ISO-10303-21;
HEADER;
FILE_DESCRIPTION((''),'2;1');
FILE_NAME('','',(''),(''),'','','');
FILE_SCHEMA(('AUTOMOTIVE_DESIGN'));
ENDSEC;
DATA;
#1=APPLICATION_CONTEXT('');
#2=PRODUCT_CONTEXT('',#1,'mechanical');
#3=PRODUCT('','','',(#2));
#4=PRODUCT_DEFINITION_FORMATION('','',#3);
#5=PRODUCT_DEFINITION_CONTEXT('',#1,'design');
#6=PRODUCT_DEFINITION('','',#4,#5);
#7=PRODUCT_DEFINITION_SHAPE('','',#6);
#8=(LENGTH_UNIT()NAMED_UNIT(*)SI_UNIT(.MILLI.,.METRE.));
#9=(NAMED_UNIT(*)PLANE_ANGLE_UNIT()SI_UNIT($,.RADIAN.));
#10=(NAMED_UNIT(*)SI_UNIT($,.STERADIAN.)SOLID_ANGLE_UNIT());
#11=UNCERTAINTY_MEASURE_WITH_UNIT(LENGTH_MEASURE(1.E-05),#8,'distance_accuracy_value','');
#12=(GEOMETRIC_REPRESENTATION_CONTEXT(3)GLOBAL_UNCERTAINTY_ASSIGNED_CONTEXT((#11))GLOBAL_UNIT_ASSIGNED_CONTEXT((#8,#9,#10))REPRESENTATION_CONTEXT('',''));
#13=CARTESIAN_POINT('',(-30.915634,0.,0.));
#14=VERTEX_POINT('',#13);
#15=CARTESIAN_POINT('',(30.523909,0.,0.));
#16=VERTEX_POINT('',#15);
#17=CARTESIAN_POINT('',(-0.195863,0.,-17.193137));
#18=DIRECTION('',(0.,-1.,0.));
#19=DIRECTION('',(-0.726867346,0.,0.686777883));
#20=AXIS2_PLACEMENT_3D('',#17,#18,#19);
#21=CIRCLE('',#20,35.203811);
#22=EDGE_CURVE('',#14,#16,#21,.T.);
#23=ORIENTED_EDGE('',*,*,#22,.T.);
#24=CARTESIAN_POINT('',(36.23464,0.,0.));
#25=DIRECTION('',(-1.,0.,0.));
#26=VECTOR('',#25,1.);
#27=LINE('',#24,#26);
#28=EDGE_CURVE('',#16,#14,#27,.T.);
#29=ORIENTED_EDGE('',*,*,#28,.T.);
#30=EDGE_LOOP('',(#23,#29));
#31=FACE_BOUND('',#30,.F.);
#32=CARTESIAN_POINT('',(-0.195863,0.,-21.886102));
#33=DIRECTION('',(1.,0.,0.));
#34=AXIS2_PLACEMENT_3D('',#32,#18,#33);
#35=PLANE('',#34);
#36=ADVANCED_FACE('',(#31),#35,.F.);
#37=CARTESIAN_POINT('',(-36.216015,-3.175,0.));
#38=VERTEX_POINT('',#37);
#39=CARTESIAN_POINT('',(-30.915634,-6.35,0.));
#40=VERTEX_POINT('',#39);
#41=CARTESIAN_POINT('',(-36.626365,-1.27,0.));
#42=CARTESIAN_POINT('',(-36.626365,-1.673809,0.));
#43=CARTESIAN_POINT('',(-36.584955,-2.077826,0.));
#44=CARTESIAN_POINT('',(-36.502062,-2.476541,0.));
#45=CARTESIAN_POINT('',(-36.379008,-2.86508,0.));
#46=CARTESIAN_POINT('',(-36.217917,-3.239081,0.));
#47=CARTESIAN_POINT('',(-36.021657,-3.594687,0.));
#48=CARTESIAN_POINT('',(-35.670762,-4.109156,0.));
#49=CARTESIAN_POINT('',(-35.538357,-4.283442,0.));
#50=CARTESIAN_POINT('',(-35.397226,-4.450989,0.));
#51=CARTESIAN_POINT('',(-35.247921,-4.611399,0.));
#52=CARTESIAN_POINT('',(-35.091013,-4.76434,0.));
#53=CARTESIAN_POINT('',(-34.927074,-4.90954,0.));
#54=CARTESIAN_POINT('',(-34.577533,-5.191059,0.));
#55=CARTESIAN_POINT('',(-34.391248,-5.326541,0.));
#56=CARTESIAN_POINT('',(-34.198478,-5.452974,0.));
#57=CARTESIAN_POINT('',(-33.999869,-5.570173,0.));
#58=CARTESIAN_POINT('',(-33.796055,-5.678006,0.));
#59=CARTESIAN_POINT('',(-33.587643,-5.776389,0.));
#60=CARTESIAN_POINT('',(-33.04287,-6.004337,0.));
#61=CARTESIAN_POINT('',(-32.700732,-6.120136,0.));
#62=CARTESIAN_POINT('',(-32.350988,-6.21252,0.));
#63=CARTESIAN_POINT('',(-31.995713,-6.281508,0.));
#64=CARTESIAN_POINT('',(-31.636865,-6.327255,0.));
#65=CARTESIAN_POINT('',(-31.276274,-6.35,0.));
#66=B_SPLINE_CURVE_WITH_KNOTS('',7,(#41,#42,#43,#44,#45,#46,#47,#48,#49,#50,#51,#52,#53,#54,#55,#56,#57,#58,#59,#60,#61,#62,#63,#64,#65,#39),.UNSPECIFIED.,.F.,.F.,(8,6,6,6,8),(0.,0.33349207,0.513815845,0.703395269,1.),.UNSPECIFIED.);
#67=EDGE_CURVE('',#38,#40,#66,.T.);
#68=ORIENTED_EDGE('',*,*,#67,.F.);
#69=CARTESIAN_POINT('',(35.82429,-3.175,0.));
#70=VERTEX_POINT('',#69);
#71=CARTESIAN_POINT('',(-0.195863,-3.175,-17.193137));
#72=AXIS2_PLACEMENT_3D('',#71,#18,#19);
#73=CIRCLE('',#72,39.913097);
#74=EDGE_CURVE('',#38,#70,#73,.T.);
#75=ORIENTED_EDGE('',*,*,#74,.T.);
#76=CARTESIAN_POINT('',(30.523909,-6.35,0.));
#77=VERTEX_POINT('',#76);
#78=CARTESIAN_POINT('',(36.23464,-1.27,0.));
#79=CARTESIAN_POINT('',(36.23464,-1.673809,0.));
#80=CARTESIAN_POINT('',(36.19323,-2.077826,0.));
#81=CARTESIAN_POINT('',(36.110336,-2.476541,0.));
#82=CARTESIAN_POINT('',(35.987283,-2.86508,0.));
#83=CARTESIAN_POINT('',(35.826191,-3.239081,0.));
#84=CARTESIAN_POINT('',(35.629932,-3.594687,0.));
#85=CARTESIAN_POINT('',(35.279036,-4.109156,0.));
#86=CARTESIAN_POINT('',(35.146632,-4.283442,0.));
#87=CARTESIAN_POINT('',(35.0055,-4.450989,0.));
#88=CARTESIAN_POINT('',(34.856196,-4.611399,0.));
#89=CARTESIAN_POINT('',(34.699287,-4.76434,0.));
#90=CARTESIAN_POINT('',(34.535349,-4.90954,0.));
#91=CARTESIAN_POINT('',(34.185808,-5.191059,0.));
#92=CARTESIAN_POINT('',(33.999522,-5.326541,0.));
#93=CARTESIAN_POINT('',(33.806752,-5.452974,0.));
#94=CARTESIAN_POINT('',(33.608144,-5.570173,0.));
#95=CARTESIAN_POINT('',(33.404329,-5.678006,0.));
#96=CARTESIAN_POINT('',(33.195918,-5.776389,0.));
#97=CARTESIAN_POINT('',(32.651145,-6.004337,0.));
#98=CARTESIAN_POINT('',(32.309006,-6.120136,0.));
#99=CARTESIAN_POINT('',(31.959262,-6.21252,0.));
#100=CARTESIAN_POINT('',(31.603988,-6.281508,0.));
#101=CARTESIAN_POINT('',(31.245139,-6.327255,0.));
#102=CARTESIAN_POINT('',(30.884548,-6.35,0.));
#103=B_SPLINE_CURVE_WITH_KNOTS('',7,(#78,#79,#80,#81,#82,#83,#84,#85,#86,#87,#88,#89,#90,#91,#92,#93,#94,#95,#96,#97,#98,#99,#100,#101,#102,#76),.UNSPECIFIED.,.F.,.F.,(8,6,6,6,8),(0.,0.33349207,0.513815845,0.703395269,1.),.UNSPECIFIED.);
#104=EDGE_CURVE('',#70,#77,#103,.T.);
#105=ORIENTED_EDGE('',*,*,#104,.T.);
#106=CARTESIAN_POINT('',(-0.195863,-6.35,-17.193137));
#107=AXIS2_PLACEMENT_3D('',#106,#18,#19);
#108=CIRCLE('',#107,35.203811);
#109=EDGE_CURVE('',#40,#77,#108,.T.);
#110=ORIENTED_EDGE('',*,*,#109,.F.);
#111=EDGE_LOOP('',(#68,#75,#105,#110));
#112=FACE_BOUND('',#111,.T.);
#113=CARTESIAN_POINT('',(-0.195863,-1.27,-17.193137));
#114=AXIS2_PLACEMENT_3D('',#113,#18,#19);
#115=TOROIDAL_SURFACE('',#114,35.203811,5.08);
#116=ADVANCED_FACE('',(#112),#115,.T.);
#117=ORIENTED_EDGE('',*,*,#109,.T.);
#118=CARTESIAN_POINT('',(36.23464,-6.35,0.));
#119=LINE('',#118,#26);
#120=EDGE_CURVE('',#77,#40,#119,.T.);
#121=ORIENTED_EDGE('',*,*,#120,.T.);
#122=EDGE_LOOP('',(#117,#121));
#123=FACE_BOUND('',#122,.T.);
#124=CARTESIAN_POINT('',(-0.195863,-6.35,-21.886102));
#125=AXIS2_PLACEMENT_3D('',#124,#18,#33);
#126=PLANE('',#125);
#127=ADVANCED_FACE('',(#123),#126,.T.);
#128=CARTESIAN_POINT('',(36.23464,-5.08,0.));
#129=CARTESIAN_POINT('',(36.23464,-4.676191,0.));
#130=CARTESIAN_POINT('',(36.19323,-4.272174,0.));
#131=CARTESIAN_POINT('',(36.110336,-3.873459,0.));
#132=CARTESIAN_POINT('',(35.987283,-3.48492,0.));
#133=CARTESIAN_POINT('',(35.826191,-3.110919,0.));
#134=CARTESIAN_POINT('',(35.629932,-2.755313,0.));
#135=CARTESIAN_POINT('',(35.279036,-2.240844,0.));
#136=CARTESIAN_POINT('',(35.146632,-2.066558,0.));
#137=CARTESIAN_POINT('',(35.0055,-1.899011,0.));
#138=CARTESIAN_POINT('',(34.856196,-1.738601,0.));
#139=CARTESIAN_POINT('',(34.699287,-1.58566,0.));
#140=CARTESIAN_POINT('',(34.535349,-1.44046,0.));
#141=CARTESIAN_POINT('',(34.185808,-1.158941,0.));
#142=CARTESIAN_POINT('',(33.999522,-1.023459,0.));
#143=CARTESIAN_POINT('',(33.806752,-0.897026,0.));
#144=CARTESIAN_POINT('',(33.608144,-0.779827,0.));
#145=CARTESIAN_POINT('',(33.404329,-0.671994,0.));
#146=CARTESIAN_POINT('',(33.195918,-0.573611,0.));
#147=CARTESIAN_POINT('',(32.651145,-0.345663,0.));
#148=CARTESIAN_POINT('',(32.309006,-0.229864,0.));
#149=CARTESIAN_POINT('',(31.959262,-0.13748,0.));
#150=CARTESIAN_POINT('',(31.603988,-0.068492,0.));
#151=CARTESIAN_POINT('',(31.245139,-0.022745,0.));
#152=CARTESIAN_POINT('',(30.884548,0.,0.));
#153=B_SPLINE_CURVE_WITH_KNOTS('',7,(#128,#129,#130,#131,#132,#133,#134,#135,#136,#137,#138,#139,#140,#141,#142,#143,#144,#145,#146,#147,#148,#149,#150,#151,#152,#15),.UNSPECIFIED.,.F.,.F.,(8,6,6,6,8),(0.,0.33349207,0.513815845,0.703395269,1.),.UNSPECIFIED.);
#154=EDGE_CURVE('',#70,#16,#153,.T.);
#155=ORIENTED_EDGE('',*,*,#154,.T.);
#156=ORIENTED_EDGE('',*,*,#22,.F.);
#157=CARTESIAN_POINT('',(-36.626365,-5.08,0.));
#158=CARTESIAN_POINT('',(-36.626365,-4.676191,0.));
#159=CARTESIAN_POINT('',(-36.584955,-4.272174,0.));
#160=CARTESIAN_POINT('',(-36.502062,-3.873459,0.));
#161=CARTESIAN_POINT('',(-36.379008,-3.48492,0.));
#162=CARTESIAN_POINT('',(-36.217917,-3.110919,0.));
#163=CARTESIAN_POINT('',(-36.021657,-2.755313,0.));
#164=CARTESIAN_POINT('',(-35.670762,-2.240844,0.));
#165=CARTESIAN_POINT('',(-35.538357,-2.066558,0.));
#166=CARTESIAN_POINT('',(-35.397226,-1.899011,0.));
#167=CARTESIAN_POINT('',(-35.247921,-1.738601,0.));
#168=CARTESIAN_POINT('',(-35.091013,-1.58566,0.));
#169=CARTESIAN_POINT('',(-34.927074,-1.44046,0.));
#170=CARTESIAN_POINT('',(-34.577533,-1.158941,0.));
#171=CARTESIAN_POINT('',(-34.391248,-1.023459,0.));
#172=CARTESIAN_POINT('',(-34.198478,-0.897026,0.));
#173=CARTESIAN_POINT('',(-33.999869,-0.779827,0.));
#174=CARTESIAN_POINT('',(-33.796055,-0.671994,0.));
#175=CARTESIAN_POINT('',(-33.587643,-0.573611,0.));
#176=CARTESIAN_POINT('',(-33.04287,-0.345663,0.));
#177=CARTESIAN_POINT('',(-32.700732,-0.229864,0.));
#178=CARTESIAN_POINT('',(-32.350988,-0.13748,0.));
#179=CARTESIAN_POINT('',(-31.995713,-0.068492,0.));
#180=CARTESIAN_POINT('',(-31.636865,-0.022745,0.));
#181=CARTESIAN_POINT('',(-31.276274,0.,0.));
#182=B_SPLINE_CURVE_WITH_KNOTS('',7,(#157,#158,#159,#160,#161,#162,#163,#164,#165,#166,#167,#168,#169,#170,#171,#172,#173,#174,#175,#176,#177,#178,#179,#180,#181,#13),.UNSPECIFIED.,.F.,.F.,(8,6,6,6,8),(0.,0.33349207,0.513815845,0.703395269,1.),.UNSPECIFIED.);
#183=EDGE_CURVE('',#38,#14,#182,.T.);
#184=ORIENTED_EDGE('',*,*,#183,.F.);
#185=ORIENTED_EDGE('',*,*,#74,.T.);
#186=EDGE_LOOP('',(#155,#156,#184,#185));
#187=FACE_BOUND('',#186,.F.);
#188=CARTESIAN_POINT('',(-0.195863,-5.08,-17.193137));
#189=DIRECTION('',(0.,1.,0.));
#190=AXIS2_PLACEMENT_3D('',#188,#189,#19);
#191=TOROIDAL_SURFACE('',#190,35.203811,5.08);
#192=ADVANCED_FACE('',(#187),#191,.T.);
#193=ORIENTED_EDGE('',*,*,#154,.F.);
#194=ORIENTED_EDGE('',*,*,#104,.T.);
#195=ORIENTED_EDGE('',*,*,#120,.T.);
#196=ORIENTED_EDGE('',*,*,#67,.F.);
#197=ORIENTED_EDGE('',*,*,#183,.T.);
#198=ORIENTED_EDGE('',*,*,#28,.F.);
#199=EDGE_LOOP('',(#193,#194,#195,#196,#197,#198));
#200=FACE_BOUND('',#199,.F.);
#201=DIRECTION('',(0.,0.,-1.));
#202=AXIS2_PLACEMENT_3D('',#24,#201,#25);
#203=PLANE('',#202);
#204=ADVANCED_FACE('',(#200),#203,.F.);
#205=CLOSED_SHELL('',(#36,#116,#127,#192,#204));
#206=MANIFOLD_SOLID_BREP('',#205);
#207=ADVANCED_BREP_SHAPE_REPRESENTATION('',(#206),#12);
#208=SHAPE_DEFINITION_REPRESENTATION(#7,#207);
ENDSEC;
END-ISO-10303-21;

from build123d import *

# Parameters (mm, degrees)
F1_DEPTH    = 6.35
F2_T2_ANGLE = 266.7511769691
F2_T4_ANGLE = 266.7511769691


# Not quite as in the source:
# - a fillet or chamfer that OpenCascade refuses, or shapes differently, is made with other operations: its cross-section is extruded or revolved along the edge and cut away or added


with BuildPart() as f1:
    # F0 (on Front) → F1 (new body)
    with BuildSketch(Plane.XZ):
        with BuildLine():
            Line((36.234639585, 0), (-36.6263650358, 0))
            ThreePointArc((-36.6263650358, 0), (-0.1958627254, -57.476948013), (36.234639585, 0))
        make_face()
    extrude(amount=F1_DEPTH)

    # F2: fillet of radius 5.08 on 2 edges, made by hand

    # F2_s1 → F2_t2 (revolve, cut)
    with BuildSketch(Plane(origin=(-8.6751336397, 0, -9.1815294637), x_dir=(0, 1, 0), z_dir=(0.6867778831, 0, 0.7268673464))):
        with BuildLine():
            ThreePointArc((-1.27, 28.6183114219), (-4.8621024484, 27.1304138704), (-6.35, 23.5383114219))
            Line((-6.35, 23.5383114219), (-6.35, 28.6183114219))
            Line((-6.35, 28.6183114219), (-1.27, 28.6183114219))
        make_face()
    revolve(axis=Axis((-0.1958627254, -6.35, -17.1931367499), (0, -1, 0)), revolution_arc=F2_T2_ANGLE, mode=Mode.SUBTRACT)

    # F2_s3 → F2_t4 (revolve, cut)
    with BuildSketch(Plane(origin=(-8.6751336397, 0, -9.1815294637), x_dir=(0, 1, 0), z_dir=(0.6867778831, 0, 0.7268673464))):
        with BuildLine():
            ThreePointArc((-5.08, 28.6183114219), (-1.4878975516, 27.1304138704), (0, 23.5383114219))
            Line((0, 23.5383114219), (0, 28.6183114219))
            Line((0, 28.6183114219), (-5.08, 28.6183114219))
        make_face()
    revolve(axis=Axis((-0.1958627254, 0, -17.1931367499), (0, -1, 0)), revolution_arc=F2_T4_ANGLE, mode=Mode.SUBTRACT)


solid = f1.part
